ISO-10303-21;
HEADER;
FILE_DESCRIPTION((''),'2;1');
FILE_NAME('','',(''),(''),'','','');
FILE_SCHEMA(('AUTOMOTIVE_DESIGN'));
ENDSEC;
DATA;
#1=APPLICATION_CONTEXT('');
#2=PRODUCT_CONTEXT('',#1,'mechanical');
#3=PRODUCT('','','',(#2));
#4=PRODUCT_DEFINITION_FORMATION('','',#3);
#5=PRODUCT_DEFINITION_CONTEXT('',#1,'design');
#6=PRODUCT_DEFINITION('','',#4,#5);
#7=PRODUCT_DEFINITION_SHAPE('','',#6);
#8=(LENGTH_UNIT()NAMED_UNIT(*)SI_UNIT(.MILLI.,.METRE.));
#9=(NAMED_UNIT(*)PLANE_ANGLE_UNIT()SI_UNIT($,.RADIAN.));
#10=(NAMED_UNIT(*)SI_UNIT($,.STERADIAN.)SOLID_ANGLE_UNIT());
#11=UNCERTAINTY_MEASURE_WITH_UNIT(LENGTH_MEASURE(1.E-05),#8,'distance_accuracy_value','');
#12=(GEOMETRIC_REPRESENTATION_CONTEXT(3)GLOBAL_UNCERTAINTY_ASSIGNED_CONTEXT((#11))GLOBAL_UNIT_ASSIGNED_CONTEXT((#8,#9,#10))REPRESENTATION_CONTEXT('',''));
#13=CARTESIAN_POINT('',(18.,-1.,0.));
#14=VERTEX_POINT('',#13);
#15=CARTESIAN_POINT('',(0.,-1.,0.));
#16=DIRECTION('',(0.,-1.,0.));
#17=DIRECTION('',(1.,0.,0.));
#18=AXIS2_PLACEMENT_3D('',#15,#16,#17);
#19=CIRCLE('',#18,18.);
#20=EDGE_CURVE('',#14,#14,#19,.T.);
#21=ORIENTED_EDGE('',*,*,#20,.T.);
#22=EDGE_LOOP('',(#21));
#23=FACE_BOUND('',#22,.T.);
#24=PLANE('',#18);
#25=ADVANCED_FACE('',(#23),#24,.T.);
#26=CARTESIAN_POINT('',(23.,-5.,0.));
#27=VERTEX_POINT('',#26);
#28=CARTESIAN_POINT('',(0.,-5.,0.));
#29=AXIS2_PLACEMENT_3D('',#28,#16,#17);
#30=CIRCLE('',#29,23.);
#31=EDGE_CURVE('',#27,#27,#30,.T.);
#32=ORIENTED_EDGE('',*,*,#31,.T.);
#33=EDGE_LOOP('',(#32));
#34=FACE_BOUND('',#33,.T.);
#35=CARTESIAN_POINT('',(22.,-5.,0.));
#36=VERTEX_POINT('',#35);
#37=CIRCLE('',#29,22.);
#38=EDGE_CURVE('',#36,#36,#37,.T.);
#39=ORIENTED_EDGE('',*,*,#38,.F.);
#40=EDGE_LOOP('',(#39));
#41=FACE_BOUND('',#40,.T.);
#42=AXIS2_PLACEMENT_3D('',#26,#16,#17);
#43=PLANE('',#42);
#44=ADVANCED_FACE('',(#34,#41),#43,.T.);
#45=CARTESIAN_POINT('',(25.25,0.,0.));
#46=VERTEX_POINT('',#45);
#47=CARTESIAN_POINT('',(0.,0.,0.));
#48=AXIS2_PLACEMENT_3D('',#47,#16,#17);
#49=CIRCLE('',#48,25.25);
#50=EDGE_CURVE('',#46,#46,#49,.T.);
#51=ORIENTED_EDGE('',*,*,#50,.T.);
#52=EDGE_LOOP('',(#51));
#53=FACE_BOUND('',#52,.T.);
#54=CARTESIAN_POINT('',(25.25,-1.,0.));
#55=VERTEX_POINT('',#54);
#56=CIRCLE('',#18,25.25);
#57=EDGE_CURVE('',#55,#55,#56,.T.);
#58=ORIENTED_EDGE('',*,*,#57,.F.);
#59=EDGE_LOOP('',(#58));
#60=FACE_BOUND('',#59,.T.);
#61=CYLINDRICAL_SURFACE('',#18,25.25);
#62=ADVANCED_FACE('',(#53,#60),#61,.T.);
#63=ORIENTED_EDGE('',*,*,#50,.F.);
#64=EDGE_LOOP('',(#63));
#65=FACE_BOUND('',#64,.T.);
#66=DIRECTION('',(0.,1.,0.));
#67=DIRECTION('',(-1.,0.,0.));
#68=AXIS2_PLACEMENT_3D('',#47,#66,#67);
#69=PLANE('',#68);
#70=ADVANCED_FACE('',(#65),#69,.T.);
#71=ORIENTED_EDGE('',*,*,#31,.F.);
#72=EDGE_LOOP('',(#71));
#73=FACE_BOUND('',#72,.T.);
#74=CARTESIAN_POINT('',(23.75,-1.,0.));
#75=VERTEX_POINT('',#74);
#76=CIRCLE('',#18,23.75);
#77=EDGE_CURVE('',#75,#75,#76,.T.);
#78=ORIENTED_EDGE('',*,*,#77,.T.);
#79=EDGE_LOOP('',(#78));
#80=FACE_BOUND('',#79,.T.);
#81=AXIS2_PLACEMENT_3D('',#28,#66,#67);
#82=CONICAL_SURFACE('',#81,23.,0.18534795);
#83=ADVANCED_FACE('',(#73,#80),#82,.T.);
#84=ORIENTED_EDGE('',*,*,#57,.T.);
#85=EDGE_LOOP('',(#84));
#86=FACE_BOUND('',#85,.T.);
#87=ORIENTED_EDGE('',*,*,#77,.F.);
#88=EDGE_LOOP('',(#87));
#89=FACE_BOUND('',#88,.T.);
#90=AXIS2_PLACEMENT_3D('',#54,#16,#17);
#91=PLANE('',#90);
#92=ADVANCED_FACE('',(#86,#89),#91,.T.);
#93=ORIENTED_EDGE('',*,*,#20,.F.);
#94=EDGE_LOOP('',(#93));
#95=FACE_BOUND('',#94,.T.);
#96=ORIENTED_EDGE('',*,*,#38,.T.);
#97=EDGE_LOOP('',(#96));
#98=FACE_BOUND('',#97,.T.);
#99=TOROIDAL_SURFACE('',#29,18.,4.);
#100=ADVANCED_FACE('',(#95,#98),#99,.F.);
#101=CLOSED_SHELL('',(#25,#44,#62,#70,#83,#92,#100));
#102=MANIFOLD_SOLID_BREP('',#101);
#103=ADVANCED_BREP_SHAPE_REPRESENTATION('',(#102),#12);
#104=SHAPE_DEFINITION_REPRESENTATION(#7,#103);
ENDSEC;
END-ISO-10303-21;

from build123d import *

# Parameters (mm, degrees)
FILLET1_R = 4


with BuildPart() as part:
    # Sketch2 → Revolve3 (revolve)
    with BuildSketch(Plane.XY):
        Polygon((22, -5), (22, -1), (0, -1), (0, 0), (25.25, 0), (25.25, -1), (23.75, -1), (23, -5), align=None)
    revolve(axis=Axis((0, -1, 0), (0, 1, 0)))

    # Fillet1
    fillet1_edges = [part.edges().sort_by_distance(p)[0] for p in [
        (-22, -1, 0),
    ]]
    fillet(fillet1_edges, radius=FILLET1_R - 0.0001)  # a hair under: the kernel refuses the full size


solid = part.part
